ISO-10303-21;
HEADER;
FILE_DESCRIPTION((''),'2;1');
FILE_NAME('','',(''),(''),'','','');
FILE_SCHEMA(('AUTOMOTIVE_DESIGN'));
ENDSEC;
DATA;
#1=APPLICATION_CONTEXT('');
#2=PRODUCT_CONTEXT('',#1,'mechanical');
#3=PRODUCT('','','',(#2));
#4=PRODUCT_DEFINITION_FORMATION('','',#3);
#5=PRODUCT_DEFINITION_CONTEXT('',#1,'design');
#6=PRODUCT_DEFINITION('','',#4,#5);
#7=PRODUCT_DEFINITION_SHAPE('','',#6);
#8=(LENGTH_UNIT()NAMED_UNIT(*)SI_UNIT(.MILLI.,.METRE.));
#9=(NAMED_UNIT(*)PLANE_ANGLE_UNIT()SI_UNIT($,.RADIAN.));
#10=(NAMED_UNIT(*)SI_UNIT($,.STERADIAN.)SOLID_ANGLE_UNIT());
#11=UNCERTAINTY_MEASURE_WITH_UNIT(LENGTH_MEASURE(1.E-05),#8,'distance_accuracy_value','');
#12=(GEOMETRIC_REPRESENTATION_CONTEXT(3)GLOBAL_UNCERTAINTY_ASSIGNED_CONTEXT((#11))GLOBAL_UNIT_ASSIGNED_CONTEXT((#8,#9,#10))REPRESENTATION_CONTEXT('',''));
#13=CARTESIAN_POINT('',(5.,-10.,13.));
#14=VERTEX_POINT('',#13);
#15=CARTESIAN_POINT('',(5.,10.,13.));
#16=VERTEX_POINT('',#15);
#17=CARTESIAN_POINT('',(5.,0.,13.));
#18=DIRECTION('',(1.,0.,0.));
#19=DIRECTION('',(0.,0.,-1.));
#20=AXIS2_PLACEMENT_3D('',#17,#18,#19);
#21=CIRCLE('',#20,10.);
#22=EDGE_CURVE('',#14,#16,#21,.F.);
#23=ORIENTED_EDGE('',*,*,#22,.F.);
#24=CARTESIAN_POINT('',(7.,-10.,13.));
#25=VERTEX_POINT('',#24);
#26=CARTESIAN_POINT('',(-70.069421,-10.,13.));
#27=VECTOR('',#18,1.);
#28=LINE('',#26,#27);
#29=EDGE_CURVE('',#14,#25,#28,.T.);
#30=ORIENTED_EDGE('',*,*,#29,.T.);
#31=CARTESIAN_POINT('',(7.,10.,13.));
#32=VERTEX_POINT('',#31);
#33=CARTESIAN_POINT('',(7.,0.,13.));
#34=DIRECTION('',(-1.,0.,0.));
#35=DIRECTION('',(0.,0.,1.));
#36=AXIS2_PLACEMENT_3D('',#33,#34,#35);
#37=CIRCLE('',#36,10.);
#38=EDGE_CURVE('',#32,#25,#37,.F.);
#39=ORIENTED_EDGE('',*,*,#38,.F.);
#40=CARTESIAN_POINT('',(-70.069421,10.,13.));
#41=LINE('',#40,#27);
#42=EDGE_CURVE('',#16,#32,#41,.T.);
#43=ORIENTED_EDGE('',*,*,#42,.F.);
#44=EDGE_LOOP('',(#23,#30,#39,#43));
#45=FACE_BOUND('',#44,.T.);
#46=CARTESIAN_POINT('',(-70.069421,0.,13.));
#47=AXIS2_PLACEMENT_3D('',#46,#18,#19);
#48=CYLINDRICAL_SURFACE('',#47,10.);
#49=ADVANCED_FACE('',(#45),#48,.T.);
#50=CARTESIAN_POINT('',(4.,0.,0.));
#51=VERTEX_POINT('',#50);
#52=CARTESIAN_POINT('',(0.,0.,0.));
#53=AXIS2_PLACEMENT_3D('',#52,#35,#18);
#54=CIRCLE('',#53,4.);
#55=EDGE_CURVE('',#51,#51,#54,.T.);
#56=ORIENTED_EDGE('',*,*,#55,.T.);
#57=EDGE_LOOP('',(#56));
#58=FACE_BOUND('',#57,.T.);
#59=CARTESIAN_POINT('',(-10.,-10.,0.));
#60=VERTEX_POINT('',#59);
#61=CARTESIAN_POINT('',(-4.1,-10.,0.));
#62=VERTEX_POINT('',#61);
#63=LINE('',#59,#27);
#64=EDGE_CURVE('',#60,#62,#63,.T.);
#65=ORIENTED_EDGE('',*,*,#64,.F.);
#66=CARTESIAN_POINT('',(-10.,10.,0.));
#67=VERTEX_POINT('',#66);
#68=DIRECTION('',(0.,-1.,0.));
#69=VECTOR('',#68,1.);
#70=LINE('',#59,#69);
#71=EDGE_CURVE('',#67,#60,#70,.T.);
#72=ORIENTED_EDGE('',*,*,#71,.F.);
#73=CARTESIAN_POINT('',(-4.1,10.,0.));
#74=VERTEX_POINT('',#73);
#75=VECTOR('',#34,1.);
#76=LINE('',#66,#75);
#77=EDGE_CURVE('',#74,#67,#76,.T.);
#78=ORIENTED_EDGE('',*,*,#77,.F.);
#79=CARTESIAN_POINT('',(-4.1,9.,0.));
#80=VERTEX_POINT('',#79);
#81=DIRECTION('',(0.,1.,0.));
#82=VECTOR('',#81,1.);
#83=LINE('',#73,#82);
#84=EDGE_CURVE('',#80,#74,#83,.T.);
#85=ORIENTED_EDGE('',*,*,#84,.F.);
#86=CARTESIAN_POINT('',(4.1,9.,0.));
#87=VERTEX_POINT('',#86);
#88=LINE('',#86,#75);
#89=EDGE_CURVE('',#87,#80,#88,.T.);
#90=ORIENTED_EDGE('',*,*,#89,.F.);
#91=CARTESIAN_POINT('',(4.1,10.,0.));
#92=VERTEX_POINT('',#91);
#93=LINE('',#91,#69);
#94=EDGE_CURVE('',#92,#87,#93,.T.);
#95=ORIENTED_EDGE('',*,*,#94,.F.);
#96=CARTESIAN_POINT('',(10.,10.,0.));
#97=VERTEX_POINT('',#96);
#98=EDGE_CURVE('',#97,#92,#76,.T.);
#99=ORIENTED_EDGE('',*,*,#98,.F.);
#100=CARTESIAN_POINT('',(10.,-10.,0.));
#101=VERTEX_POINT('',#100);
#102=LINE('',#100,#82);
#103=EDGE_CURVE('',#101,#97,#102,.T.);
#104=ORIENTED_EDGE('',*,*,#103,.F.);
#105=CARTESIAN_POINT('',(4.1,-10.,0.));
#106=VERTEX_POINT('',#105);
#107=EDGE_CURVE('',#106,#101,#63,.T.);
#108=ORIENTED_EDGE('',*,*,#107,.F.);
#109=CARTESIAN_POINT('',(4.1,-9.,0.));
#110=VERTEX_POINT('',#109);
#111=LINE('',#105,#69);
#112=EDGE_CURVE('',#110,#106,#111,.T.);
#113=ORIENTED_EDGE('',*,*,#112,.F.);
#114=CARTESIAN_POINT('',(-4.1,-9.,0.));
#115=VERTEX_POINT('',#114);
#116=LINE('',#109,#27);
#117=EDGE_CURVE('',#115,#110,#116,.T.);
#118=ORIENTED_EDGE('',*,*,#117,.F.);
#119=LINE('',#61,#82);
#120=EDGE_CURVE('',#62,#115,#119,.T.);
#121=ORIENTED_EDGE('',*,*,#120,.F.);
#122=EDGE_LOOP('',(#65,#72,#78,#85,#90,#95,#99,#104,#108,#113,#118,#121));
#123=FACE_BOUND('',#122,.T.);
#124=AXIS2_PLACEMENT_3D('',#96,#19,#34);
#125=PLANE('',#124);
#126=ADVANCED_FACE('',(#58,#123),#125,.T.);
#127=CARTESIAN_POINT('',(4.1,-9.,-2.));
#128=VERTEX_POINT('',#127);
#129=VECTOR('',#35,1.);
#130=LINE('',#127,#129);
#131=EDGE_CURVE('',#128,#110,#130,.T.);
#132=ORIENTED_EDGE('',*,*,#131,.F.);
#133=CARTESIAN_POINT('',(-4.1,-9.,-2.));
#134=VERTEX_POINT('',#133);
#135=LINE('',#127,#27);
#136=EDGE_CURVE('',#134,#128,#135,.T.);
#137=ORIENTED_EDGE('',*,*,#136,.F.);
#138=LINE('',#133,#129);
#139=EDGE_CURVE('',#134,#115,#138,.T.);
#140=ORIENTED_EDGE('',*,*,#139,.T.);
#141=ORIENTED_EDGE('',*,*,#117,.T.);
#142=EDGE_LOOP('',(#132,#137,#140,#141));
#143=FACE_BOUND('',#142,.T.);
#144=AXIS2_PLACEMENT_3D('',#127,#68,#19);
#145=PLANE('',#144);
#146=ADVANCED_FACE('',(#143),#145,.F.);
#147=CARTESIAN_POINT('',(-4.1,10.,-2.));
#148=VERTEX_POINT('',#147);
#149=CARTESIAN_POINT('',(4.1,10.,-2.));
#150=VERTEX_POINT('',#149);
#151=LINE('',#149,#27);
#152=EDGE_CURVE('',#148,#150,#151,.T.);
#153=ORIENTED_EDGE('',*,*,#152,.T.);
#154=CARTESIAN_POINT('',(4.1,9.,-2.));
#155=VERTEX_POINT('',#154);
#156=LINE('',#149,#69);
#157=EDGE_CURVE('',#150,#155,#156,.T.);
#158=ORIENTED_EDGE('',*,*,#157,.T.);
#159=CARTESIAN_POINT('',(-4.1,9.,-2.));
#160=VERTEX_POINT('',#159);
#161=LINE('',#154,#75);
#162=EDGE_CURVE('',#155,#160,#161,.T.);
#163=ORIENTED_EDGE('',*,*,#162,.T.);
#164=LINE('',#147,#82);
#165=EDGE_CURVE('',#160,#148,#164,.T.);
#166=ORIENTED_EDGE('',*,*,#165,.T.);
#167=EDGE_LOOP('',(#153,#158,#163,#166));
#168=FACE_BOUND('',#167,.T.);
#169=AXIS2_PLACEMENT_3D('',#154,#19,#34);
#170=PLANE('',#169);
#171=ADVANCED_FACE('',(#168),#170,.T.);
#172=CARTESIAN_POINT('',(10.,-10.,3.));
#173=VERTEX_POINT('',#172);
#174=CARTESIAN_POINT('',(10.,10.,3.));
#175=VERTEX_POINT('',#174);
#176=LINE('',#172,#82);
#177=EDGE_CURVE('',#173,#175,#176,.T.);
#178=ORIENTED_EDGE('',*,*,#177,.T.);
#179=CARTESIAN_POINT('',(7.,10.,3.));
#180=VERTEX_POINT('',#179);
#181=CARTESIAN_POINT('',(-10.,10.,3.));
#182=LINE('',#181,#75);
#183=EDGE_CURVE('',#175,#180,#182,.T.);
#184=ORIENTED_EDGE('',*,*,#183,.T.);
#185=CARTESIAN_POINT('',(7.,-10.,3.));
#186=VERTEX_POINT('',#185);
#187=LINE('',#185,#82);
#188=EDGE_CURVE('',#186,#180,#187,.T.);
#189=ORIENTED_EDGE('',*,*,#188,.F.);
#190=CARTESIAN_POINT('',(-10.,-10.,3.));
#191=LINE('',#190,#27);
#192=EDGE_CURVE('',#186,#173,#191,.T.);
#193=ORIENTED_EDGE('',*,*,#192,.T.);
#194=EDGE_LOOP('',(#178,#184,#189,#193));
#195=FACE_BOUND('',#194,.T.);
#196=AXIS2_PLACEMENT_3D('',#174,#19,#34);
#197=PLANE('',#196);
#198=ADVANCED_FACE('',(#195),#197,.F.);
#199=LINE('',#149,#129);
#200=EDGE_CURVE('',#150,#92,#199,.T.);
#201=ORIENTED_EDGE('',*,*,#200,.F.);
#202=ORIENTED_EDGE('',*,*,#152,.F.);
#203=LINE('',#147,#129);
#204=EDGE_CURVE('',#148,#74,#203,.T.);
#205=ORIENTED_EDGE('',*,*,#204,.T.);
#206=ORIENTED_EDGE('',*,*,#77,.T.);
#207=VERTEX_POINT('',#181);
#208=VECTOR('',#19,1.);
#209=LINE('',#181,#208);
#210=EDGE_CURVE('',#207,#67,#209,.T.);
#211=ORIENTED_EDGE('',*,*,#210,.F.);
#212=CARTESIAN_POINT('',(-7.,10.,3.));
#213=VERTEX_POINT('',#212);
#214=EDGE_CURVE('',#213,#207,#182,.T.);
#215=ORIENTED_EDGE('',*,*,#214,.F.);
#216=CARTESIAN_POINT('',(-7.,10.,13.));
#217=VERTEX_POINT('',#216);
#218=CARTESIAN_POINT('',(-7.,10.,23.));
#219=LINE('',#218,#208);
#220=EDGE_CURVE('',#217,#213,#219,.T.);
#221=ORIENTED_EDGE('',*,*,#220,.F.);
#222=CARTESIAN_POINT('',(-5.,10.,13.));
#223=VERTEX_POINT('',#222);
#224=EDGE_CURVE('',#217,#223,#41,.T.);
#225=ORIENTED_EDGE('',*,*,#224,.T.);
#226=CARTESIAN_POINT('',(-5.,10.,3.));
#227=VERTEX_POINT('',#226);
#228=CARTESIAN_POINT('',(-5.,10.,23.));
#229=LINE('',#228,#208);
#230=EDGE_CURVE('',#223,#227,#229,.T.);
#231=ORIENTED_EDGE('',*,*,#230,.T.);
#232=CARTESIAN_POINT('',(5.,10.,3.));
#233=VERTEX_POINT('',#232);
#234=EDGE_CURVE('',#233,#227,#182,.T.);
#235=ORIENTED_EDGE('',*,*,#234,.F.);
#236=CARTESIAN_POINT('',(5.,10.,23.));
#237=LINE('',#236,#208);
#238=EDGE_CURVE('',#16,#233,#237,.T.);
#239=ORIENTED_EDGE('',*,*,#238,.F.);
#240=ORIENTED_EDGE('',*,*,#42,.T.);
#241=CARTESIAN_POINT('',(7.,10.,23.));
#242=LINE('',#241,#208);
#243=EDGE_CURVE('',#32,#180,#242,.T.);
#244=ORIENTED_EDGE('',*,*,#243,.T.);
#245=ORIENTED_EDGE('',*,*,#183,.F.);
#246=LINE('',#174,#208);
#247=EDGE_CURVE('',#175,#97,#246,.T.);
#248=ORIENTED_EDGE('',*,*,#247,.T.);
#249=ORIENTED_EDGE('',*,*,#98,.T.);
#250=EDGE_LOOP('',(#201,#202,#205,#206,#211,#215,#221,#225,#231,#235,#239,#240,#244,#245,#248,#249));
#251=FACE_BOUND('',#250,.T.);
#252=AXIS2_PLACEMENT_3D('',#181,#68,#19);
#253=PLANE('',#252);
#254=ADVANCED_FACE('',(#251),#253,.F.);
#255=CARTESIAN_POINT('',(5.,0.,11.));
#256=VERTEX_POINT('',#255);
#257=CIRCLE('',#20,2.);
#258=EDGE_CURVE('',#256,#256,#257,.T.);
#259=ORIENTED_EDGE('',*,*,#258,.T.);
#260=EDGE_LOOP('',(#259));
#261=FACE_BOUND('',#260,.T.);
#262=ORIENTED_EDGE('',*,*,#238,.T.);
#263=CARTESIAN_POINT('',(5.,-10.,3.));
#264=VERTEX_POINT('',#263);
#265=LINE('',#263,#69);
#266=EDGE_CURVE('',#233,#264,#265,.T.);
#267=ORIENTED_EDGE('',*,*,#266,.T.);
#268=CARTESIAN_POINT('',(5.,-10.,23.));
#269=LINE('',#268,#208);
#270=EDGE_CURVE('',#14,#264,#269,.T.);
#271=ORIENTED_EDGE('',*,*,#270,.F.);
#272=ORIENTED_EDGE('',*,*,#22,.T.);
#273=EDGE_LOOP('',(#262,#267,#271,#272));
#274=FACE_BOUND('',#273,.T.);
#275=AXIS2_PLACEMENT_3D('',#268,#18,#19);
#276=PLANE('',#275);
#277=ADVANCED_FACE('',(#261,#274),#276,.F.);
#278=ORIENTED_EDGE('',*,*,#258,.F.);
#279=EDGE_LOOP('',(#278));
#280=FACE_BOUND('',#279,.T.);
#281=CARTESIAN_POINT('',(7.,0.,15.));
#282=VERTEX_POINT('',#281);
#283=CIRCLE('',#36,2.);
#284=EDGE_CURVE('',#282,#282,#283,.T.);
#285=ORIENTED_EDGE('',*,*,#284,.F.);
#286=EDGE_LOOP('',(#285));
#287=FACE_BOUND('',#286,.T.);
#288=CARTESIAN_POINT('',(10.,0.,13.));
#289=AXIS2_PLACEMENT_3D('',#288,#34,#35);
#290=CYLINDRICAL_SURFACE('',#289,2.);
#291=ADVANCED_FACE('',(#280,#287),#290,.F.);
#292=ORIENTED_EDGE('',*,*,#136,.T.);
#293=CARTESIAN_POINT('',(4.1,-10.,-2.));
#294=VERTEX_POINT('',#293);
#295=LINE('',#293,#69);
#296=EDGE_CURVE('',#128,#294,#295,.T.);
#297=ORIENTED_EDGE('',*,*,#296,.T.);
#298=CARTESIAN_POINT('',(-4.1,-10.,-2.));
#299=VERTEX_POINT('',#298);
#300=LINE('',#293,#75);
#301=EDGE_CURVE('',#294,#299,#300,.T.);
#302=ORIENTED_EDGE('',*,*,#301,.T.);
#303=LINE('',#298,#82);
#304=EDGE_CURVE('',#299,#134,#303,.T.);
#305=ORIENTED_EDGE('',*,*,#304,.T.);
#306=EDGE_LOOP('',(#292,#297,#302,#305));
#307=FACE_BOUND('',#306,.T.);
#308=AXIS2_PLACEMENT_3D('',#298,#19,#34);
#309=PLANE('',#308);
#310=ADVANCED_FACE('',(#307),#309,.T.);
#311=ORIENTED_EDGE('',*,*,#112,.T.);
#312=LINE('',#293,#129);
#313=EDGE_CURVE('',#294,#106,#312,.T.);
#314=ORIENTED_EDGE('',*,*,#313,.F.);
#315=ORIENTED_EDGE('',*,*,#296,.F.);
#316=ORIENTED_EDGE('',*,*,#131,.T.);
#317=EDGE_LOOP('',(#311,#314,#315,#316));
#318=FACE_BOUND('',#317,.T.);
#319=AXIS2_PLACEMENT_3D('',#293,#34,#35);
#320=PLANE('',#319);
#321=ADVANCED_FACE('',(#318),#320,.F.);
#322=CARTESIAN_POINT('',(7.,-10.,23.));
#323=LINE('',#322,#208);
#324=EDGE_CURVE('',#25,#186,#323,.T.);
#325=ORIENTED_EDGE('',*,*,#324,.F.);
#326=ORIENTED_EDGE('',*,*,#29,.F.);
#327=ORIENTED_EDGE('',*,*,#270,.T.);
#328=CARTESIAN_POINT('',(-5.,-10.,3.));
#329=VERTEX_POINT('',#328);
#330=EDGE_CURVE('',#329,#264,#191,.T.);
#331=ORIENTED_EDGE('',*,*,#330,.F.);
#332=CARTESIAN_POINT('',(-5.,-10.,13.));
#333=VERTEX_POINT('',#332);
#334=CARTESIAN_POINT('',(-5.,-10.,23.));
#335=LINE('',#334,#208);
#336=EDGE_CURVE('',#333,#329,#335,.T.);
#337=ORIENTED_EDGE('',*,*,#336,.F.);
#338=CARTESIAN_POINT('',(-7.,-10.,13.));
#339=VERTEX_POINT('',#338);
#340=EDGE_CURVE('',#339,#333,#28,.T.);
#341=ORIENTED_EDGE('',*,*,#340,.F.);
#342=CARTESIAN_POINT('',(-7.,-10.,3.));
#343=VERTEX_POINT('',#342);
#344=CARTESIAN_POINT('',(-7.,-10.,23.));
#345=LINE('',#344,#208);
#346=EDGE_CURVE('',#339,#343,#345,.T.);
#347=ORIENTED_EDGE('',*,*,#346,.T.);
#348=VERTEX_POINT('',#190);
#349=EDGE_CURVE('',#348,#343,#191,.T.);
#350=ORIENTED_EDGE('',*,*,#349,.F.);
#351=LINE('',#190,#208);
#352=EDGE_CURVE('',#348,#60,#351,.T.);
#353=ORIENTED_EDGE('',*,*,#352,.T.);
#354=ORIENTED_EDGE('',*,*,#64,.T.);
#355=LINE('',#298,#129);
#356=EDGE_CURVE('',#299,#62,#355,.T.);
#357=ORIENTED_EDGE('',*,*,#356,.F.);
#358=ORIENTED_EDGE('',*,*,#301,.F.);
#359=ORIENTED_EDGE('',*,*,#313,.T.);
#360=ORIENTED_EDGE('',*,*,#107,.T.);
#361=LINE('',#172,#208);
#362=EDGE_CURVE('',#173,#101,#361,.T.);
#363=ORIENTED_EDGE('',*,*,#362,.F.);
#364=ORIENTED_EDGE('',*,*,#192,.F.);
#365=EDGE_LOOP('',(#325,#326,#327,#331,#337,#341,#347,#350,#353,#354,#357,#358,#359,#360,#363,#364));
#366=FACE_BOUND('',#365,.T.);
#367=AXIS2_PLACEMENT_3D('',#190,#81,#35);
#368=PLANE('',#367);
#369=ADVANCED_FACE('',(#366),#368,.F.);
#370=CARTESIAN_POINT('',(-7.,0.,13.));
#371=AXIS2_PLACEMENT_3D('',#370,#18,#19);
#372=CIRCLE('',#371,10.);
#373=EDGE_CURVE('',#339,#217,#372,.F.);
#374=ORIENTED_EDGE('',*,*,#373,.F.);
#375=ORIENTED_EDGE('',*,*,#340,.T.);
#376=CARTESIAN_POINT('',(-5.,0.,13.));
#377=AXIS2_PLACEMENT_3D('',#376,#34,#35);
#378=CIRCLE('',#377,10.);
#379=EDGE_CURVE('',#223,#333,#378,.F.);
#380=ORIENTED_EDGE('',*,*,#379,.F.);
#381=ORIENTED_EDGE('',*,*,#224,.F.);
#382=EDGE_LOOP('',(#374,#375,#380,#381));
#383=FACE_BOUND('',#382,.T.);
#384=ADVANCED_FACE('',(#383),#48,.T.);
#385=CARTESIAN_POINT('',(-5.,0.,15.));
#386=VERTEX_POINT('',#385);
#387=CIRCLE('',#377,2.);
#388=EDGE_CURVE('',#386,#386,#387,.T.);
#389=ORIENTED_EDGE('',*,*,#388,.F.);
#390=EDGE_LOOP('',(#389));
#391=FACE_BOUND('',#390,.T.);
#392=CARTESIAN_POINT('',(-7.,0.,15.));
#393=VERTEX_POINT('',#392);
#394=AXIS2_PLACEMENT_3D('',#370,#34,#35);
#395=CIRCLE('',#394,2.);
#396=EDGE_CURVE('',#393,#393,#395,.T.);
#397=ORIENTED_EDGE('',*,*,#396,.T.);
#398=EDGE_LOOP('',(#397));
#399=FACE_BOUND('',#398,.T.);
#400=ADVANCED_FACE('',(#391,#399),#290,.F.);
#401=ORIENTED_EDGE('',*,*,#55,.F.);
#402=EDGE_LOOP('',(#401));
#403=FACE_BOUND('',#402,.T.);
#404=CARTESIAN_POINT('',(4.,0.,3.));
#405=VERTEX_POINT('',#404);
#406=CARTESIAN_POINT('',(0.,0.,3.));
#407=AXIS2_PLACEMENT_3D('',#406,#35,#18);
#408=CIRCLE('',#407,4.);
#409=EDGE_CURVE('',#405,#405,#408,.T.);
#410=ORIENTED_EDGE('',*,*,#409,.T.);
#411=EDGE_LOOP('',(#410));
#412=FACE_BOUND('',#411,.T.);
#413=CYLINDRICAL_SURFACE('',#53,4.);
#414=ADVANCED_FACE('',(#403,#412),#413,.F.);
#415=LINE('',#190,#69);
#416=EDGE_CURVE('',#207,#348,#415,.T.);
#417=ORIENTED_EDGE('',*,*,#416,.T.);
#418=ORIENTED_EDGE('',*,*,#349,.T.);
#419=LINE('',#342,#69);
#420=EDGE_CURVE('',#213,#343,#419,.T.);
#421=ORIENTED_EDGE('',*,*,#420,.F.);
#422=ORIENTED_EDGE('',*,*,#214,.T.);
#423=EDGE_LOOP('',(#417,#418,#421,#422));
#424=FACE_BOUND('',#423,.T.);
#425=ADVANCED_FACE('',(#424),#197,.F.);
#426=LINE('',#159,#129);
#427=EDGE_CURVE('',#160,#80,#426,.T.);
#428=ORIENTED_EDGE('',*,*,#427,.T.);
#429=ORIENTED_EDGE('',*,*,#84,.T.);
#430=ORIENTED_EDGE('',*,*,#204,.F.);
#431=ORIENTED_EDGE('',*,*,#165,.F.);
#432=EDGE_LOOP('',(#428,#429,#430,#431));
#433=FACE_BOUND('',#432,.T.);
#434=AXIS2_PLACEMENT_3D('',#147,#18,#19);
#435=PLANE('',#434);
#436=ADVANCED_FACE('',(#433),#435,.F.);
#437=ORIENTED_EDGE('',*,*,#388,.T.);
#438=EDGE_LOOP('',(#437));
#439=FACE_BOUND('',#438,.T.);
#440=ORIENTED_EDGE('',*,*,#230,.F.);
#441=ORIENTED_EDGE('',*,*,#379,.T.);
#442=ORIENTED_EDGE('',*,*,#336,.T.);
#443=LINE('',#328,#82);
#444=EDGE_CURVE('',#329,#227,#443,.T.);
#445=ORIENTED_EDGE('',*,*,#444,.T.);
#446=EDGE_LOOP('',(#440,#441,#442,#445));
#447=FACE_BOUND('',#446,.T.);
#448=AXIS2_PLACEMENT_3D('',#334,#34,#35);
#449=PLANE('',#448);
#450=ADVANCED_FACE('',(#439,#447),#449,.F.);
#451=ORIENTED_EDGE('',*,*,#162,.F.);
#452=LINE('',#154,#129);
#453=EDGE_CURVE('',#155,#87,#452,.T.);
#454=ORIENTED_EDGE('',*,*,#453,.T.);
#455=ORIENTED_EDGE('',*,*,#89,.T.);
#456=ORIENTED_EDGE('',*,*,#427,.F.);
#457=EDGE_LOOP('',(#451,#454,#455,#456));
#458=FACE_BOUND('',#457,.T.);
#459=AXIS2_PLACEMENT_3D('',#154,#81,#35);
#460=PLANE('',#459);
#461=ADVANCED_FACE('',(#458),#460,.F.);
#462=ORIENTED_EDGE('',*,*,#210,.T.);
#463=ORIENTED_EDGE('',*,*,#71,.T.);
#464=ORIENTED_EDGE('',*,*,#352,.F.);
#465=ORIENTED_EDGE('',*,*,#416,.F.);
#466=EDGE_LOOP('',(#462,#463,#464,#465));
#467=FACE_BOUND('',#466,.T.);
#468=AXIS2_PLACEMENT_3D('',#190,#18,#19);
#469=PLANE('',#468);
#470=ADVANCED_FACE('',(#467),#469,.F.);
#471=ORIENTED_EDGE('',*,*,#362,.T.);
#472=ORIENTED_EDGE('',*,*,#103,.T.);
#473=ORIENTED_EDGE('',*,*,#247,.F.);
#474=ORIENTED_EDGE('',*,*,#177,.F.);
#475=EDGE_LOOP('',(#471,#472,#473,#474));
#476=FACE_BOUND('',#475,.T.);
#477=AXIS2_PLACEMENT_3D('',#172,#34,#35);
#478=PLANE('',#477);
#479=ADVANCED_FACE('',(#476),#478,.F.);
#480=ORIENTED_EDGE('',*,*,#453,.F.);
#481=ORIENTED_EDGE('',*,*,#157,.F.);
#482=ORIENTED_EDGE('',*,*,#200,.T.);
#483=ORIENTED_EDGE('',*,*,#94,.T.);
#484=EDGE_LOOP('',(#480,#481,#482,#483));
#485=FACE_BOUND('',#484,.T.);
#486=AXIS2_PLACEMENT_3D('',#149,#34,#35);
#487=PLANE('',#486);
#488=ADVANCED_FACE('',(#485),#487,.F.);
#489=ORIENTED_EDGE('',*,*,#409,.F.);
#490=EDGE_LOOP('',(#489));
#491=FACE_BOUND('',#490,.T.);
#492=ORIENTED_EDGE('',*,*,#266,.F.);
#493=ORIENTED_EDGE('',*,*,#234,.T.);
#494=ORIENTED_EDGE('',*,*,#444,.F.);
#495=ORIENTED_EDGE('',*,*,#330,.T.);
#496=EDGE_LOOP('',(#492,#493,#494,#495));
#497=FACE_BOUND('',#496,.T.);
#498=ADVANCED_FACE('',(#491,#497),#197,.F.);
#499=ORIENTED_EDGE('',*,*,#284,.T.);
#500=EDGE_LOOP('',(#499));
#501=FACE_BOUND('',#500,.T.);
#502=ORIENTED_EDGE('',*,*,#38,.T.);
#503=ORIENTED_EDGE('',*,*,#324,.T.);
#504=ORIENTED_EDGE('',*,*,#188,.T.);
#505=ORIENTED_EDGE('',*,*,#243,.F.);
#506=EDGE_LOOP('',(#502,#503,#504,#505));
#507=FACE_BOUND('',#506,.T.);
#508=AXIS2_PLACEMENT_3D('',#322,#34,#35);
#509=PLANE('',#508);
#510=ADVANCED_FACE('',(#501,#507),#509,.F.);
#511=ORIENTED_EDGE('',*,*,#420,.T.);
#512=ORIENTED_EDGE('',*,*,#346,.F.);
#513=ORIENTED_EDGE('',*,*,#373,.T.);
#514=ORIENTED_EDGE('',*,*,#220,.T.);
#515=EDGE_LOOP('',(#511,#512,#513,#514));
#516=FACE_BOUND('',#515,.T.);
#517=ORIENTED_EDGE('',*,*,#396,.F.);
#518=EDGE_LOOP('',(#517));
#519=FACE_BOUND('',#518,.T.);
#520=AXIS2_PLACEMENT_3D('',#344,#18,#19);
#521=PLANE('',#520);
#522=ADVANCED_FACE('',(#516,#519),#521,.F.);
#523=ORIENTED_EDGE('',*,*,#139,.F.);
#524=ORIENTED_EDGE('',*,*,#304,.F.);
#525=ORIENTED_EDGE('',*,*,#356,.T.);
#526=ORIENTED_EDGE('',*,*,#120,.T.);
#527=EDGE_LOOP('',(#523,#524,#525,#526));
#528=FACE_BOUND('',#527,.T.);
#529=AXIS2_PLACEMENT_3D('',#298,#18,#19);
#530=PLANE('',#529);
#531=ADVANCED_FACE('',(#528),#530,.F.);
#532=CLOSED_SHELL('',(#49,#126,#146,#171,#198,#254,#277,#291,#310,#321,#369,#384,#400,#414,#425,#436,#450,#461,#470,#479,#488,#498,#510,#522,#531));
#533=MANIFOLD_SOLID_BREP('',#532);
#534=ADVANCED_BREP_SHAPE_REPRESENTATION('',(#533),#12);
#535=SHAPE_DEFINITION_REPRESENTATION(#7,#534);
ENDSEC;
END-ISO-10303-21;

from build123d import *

# Parameters (mm, degrees)
SKETCH_1_W          = 20
SKETCH_1_H          = 20
EXTRUDE_1_DEPTH     = 3
SKETCH_2_W          = 2
SKETCH_2_H          = 20
EXTRUDE_2_DEPTH     = 20
CUT_EXTRUDE_START   = -14
CUT_EXTRUDE_2_DEPTH = 14
SKETCH_4_R          = 2
CUT_EXTRUDE_3_DEPTH = 31.298514815
SKETCH_6_R          = 4
CUT_EXTRUDE_5_DEPTH = 25.494897428
SKETCH_7_W          = 8.2
SKETCH_7_H          = 1
EXTRUDE_3_DEPTH     = 2


# Read off the part's stored shape, not the designer's step: 切除-拉伸2
with BuildPart() as part:
    # 草图1 → 凸台-拉伸1 (new body)
    with BuildSketch(Plane.XY):
        Rectangle(SKETCH_1_W, SKETCH_1_H)
    extrude(amount=EXTRUDE_1_DEPTH)

    # 草图2 → 凸台-拉伸2 (add)
    with BuildSketch(Plane.XY.offset(3)):
        with Locations((-6, 0)):
            Rectangle(SKETCH_2_W, SKETCH_2_H)
        with Locations((6, 0)):
            Rectangle(SKETCH_2_W, SKETCH_2_H)
    extrude(amount=EXTRUDE_2_DEPTH)

    # 切除-拉伸2 outline → 切除-拉伸2 (cut)
    with BuildSketch(Plane.ZY.offset(7).offset(CUT_EXTRUDE_START)):
        with BuildLine():
            Line((23, 10), (13, 10))
            ThreePointArc((13, 10), (20.071067812, 7.071067812), (23, 0))
            Line((23, 0), (23, 10))
        make_face()
        with BuildLine():
            Line((23, -10), (23, 0))
            ThreePointArc((23, 0), (20.071067812, -7.071067812), (13, -10))
            Line((13, -10), (23, -10))
        make_face()
    extrude(amount=CUT_EXTRUDE_2_DEPTH, mode=Mode.SUBTRACT)

    # 草图4 → 切除-拉伸3 (cut, through all)
    with BuildSketch(Plane.ZY.offset(7)):
        with Locations((13, 0)):
            Circle(SKETCH_4_R)
    extrude(amount=-CUT_EXTRUDE_3_DEPTH, mode=Mode.SUBTRACT)

    # 草图6 → 切除-拉伸5 (cut, through all)
    with BuildSketch(Plane.XY.offset(3)):
        Circle(SKETCH_6_R)
    extrude(amount=-CUT_EXTRUDE_5_DEPTH, mode=Mode.SUBTRACT)

    # 草图7 → 凸台-拉伸3 (add)
    with BuildSketch(Plane(origin=(0, 0, 0), x_dir=(-1, 0, 0), z_dir=(0, 0, -1))):
        with Locations((0, 9.5)):
            Rectangle(SKETCH_7_W, SKETCH_7_H)
        with Locations((0, -9.5)):
            Rectangle(SKETCH_7_W, SKETCH_7_H)
    extrude(amount=EXTRUDE_3_DEPTH)


solid = part.part
